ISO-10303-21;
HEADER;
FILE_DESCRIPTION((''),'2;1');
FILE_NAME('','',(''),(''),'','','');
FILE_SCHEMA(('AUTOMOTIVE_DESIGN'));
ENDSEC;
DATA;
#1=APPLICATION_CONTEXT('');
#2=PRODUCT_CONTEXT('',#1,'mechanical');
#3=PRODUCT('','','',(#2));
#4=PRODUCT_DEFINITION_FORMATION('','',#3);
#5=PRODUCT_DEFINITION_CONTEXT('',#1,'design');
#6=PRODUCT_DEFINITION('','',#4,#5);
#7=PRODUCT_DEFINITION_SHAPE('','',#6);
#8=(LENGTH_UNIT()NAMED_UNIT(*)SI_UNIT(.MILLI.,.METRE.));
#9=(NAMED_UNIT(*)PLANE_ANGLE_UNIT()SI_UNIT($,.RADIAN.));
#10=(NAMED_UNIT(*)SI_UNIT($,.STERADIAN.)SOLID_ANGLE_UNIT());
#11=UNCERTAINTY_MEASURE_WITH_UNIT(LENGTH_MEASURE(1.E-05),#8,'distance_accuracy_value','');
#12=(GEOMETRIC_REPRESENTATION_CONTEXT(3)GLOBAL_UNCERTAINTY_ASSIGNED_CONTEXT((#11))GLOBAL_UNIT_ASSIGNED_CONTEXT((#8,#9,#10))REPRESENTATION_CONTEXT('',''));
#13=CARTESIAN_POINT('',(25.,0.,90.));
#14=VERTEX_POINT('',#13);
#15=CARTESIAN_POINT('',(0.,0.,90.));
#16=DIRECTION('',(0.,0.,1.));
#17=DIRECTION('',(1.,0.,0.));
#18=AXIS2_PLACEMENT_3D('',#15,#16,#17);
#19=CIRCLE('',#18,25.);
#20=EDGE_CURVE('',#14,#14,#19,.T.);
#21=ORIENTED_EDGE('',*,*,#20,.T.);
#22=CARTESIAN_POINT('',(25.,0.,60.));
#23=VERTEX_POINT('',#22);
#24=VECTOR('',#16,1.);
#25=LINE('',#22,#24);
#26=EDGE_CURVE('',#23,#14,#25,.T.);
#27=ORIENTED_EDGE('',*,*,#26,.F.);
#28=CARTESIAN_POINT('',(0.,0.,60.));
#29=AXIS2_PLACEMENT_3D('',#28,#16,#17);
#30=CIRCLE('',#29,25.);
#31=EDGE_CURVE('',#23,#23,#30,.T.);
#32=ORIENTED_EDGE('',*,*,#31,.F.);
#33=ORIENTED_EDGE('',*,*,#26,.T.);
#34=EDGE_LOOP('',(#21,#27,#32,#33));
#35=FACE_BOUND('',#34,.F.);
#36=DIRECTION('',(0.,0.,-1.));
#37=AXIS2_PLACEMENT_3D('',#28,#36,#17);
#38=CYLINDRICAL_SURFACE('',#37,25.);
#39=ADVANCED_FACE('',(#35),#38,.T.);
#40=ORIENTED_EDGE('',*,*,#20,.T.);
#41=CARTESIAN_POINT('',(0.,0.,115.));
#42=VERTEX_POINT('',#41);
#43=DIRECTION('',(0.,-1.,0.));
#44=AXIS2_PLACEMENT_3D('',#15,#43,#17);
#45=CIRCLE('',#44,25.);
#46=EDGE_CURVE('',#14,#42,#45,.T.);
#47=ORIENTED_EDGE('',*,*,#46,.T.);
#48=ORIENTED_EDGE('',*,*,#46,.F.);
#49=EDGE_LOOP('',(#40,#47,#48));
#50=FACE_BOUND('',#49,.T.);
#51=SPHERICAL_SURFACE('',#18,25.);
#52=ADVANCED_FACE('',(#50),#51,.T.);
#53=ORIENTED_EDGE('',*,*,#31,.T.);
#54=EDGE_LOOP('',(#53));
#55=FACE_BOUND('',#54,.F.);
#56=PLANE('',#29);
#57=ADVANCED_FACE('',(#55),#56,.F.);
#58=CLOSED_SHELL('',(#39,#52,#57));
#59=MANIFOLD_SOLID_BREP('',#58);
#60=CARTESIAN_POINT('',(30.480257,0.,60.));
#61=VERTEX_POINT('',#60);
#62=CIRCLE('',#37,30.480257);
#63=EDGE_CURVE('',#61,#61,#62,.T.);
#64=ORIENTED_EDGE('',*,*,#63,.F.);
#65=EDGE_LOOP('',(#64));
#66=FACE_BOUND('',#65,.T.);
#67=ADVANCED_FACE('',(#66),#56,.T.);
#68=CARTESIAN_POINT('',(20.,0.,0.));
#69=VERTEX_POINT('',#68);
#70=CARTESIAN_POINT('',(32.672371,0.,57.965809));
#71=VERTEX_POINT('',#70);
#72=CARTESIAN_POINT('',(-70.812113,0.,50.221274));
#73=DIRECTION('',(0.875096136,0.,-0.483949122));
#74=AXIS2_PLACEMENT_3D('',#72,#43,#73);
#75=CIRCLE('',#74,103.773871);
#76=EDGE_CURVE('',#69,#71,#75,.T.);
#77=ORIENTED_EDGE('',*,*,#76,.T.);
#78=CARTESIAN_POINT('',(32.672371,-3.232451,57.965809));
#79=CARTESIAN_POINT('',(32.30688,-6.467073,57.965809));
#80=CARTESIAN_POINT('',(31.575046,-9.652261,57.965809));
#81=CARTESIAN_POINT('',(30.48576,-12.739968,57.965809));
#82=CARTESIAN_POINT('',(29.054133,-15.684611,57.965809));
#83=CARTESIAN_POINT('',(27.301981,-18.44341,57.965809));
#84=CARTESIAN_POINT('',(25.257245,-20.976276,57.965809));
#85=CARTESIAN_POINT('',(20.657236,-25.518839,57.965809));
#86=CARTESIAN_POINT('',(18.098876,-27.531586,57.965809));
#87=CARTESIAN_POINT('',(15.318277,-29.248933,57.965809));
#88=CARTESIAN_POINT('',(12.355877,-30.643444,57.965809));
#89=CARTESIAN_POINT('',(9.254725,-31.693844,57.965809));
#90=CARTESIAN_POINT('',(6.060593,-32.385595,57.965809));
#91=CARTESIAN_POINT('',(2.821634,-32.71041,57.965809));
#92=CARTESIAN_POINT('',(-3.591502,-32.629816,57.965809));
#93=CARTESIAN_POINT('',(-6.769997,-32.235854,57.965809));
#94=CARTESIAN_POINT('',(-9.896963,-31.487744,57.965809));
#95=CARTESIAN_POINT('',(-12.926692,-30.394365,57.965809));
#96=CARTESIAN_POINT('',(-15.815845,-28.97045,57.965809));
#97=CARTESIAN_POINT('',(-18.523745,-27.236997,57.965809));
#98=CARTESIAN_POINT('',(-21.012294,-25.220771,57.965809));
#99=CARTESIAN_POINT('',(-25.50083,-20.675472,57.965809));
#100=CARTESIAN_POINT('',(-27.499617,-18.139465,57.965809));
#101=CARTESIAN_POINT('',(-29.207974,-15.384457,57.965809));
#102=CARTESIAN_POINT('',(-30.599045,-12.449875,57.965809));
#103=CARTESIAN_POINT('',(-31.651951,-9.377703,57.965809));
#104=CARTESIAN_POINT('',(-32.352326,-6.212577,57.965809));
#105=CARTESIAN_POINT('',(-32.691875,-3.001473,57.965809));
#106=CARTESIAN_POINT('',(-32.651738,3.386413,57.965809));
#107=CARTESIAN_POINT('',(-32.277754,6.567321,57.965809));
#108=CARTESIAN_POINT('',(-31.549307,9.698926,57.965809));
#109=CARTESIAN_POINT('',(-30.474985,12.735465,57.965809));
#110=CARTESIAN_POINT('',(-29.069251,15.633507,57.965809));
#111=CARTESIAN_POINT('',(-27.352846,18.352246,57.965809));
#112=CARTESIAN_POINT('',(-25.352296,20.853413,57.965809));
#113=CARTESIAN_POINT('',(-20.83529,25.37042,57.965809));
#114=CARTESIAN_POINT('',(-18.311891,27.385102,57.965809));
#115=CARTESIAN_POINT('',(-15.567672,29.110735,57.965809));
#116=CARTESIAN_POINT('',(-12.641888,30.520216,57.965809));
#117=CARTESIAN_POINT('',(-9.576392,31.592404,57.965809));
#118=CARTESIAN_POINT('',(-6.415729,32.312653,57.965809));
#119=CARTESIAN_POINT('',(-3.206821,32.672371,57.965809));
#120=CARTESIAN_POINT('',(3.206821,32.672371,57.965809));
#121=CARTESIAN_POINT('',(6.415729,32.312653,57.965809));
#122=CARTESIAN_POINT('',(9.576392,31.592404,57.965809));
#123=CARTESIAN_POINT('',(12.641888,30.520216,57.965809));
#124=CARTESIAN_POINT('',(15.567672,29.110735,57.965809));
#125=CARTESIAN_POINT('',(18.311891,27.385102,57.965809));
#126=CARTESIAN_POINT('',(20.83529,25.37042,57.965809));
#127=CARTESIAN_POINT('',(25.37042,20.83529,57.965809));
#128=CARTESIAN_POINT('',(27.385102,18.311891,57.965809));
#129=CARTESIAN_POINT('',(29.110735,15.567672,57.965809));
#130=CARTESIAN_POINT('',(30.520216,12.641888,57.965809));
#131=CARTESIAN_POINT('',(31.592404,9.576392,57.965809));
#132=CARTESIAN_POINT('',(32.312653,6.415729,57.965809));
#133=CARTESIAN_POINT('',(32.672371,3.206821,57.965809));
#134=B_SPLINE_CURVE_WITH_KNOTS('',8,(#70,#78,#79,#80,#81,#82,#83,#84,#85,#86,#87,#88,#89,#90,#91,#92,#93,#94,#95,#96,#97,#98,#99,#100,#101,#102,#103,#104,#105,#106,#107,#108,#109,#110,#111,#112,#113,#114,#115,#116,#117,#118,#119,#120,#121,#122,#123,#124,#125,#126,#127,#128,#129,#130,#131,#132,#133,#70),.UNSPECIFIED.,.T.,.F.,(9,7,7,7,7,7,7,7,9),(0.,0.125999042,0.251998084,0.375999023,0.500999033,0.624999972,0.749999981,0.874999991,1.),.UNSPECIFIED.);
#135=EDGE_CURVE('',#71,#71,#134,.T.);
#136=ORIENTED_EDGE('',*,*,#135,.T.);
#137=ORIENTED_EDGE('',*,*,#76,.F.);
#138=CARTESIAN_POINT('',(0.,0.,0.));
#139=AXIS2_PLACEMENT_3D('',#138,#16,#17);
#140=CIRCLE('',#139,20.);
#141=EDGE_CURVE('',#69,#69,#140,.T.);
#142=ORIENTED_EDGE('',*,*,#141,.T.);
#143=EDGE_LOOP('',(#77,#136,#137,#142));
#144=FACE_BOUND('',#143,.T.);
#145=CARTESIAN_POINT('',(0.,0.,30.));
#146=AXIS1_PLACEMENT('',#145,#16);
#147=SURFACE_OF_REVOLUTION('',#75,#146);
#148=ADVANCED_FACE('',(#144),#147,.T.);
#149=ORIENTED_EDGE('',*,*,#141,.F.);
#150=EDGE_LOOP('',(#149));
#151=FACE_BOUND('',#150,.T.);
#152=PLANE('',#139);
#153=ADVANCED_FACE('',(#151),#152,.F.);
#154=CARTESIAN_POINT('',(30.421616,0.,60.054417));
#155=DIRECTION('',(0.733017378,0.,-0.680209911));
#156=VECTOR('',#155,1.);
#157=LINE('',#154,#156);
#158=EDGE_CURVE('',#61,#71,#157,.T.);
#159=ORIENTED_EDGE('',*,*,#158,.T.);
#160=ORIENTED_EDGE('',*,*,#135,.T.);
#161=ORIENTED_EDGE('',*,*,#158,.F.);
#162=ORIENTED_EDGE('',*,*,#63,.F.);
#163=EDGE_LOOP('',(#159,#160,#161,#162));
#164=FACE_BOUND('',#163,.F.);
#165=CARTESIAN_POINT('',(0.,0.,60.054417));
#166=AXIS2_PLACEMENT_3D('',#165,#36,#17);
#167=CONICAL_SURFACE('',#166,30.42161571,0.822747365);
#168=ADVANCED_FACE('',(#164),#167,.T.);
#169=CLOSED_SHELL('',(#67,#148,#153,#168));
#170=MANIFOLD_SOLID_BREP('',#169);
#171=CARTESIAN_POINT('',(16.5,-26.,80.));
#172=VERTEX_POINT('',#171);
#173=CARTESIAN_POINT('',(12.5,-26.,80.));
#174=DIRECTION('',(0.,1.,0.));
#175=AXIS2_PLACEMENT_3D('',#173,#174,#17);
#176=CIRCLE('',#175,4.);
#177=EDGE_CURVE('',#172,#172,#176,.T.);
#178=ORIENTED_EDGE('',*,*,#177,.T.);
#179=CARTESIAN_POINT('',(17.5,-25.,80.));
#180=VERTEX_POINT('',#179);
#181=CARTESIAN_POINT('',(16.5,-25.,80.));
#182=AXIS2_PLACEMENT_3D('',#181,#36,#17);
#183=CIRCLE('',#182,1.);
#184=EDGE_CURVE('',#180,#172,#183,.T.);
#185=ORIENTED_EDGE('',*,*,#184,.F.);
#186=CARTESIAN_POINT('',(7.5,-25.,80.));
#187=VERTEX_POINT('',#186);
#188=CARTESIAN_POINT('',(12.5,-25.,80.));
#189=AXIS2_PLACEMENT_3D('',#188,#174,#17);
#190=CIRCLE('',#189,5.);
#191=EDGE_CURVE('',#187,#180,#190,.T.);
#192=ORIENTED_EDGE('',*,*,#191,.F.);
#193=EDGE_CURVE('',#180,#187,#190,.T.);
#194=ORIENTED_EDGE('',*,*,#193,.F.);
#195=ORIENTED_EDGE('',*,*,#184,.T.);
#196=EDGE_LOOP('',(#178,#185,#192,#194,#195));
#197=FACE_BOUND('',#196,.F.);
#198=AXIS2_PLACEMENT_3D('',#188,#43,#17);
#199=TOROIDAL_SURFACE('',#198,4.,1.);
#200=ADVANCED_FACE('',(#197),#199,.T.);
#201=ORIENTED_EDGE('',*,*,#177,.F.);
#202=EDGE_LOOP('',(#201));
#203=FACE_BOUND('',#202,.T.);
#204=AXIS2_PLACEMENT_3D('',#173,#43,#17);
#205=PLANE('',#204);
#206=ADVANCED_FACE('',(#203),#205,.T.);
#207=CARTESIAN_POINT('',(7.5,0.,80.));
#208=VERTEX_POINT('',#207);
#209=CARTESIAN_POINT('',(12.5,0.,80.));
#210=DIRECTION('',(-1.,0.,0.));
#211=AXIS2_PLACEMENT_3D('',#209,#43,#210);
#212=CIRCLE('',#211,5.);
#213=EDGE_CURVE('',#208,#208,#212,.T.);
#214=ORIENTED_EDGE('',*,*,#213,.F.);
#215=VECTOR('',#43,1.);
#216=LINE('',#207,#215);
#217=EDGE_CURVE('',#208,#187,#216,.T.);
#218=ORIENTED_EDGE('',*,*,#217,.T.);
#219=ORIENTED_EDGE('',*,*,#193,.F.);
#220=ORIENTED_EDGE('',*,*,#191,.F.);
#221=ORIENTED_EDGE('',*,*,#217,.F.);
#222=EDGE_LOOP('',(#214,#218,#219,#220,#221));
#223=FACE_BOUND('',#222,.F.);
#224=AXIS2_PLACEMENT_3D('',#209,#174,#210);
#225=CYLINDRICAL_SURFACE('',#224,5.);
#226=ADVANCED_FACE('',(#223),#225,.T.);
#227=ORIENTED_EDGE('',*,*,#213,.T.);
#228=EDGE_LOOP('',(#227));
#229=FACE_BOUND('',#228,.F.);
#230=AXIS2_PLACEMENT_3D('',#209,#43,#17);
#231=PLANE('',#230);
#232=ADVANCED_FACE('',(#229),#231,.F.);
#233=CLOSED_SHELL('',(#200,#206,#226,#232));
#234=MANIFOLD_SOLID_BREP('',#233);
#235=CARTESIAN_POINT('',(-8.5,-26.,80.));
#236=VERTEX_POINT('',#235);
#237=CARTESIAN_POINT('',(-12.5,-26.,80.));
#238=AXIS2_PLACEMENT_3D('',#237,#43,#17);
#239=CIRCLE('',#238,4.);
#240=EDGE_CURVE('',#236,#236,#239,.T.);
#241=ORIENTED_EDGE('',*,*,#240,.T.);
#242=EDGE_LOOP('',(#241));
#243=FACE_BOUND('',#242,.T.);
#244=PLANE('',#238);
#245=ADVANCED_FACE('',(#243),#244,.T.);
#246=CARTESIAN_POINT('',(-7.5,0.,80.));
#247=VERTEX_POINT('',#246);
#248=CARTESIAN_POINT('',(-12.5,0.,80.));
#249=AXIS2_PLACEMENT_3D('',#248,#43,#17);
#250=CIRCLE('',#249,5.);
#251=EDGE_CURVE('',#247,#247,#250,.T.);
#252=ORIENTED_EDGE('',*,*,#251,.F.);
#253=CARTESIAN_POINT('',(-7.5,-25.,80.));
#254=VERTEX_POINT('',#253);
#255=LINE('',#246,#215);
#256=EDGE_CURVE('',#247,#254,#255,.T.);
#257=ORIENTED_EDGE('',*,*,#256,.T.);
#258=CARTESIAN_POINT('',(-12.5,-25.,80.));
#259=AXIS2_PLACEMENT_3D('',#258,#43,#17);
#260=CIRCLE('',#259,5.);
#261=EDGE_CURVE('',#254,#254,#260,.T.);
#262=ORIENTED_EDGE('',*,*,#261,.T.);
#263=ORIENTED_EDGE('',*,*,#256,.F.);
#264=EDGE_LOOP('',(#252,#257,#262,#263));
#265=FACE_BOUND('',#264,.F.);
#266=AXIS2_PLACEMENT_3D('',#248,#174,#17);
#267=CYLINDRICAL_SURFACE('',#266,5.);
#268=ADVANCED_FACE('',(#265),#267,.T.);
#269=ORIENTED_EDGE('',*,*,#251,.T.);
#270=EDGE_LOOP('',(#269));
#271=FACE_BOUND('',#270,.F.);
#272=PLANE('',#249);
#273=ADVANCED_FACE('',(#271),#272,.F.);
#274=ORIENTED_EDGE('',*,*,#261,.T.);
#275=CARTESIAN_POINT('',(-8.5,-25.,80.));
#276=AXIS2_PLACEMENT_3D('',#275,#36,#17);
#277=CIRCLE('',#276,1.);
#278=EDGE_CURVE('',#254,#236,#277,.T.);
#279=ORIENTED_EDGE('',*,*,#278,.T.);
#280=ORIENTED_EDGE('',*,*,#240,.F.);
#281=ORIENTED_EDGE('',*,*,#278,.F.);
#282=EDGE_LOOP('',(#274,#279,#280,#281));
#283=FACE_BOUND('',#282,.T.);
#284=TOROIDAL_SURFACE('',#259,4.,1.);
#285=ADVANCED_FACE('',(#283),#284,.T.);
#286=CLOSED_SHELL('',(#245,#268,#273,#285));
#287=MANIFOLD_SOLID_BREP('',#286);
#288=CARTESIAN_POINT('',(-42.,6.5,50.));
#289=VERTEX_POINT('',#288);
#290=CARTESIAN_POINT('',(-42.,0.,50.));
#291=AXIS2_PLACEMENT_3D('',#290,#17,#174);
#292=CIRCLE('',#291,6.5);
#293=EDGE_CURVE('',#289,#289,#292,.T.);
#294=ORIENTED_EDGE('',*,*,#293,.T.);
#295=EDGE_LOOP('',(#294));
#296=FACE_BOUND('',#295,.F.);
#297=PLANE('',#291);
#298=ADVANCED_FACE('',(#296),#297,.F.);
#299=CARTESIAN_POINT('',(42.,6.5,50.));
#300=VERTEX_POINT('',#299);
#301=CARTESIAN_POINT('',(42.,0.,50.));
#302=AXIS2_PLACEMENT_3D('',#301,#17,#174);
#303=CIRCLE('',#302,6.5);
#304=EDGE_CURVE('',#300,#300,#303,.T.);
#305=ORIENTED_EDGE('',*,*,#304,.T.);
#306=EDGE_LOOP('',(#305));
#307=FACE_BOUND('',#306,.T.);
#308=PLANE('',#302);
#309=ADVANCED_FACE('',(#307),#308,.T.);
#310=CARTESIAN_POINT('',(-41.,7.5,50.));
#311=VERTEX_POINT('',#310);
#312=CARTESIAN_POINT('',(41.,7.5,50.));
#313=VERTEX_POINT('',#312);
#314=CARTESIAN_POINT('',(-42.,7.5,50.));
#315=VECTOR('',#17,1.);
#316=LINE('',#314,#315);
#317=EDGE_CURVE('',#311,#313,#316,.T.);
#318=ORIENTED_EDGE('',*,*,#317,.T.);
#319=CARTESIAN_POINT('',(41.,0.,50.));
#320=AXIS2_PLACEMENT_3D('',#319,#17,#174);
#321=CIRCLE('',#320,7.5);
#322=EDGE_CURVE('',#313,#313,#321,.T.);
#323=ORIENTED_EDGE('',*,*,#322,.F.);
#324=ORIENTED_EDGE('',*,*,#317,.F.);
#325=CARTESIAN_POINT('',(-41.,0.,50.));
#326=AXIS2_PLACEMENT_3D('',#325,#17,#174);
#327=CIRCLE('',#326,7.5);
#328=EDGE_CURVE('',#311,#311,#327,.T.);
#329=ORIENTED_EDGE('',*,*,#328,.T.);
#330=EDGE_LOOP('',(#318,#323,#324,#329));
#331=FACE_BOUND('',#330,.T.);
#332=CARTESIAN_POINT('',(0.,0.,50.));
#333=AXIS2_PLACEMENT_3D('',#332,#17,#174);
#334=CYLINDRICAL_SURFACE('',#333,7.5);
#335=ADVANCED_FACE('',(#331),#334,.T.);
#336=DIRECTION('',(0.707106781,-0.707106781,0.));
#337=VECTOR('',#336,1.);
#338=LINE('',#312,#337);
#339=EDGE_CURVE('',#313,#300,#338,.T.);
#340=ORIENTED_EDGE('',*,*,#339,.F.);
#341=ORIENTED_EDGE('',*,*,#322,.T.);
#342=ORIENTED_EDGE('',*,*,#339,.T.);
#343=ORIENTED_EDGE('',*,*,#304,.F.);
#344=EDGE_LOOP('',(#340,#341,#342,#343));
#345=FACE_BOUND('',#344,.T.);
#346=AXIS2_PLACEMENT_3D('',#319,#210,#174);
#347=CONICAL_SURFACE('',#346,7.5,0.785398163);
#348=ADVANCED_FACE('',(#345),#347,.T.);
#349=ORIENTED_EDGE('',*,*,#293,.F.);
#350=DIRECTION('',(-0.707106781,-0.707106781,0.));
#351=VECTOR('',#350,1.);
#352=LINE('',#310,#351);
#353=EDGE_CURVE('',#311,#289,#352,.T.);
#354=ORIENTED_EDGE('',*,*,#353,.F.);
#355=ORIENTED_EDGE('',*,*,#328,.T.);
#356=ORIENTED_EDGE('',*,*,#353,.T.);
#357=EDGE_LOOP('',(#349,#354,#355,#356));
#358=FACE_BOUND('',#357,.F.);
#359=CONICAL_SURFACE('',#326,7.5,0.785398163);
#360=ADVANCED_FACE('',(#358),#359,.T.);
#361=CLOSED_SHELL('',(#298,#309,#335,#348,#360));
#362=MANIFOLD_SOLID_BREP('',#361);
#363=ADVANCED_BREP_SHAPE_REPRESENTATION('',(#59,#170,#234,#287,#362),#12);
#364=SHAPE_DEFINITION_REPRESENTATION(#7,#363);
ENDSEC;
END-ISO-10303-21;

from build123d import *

# Parameters (mm, degrees)
F3_R      = 25
F5_DEPTH  = 55
F6_R      = 25
F4_R      = 5
F7_DEPTH  = 26
F10_DEPTH = 42
F11_SIZE  = 1


# Not quite as in the source:
# - a fillet or chamfer that OpenCascade refuses, or shapes differently, is made with other operations: its cross-section is extruded or revolved along the edge and cut away or added


with BuildPart() as f1:
    # F0 (on Front) → F1 (revolve)
    with BuildSketch(Plane.XZ):
        with BuildLine():
            Line((0, 60), (0, 0))
            Line((0, 0), (20, 0))
            ThreePointArc((20, 0), (30.7804742264, 29.0561512028), (32.5, 60))
            Line((32.5, 60), (0, 60))
        make_face()
    revolve(axis=Axis((0, 0, 30), (0, 0, 1)))

    # F2: chamfer of 2 on 1 edges, made by hand

    # F2_s1 → F2_t2 (revolve, cut)
    with BuildSketch(Plane.XZ):
        with BuildLine():
            Line((30.42161571, 60.0544167929), (32.7310120298, 57.9113922058))
            Line((32.7310120298, 57.9113922058), (32.7709004847, 57.914377364))
            ThreePointArc((32.7709004847, 57.914377364), (32.6335391575, 58.9572189948), (32.539822014, 60.0037692442))
            Line((32.539822014, 60.0037692442), (32.5, 60.04))
            ThreePointArc((32.5, 60.04), (31.460807855, 60.04), (30.42161571, 60.0944167929))
            Line((30.42161571, 60.0944167929), (30.42161571, 60.0544167929))
        make_face()
    revolve(axis=Axis((0, 0, 60), (0, 0, 1)), mode=Mode.SUBTRACT)


with BuildPart() as f5:
    # F3 (on face) → F5 (new body)
    with BuildSketch(Plane.XY.offset(60)):
        Circle(F3_R)
    extrude(amount=F5_DEPTH)

    # F6
    f6_edges = [f5.edges().sort_by_distance(p)[0] for p in [
        (-25, 0, 115),
    ]]
    fillet(f6_edges, radius=F6_R)


with BuildPart() as f7:
    # F4 (on Front) → F7 (new body)
    with BuildSketch(Plane.XZ):
        with Locations((-12.5, 80)):
            Circle(F4_R)
    extrude(amount=F7_DEPTH)

    # F8: fillet of radius 1 on 1 edges, made by hand

    # F8_s1 → F8_t2 (revolve, cut)
    with BuildSketch(Plane.XY.offset(80)):
        with BuildLine():
            ThreePointArc((-7.5, -25), (-7.7928932188, -25.7071067812), (-8.5, -26))
            Line((-8.5, -26), (-7.5, -26))
            Line((-7.5, -26), (-7.5, -25))
        make_face()
    revolve(axis=Axis((-12.5, -26, 80), (0, -1, 0)), mode=Mode.SUBTRACT)


with BuildPart() as f7b:
    # F4 (on Front) → F7, piece 2 (new body)
    with BuildSketch(Plane.XZ):
        with BuildLine():
            ThreePointArc((17.5, 80), (12.5, 85), (7.5, 80))
            ThreePointArc((7.5, 80), (12.5, 75), (17.5, 80))
        make_face()
    extrude(amount=F7_DEPTH)

    # F8#2: fillet of radius 1 on 1 edges, made by hand

    # F8_2_s1 → F8_2_t2 (revolve, cut)
    with BuildSketch(Plane.XY.offset(80)):
        with BuildLine():
            ThreePointArc((17.5, -25), (17.2071067812, -25.7071067812), (16.5, -26))
            Line((16.5, -26), (17.5, -26))
            Line((17.5, -26), (17.5, -25))
        make_face()
    revolve(axis=Axis((12.5, -26, 80), (0, 1, 0)), mode=Mode.SUBTRACT)


with BuildPart() as f10:
    # F9 (on Right) → F10 (new body, symmetric)
    with BuildSketch(Plane.YZ):
        with BuildLine():
            ThreePointArc((0, 42.5), (5.3033008589, 44.6966991411), (7.5, 50))
            ThreePointArc((7.5, 50), (-5.3033008589, 55.3033008589), (0, 42.5))
        make_face()
    extrude(amount=F10_DEPTH, both=True)

    # F11
    f11_edges = [f10.edges().sort_by_distance(p)[0] for p in [
        (42, -5.303301, 55.303301),
        (-42, -5.303301, 55.303301),
        (-42, 5.303301, 44.696699),
        (42, 5.303301, 44.696699),
    ]]
    chamfer(f11_edges, length=F11_SIZE)


solid = Compound([f1.part, f5.part, f7.part, f7b.part, f10.part])
